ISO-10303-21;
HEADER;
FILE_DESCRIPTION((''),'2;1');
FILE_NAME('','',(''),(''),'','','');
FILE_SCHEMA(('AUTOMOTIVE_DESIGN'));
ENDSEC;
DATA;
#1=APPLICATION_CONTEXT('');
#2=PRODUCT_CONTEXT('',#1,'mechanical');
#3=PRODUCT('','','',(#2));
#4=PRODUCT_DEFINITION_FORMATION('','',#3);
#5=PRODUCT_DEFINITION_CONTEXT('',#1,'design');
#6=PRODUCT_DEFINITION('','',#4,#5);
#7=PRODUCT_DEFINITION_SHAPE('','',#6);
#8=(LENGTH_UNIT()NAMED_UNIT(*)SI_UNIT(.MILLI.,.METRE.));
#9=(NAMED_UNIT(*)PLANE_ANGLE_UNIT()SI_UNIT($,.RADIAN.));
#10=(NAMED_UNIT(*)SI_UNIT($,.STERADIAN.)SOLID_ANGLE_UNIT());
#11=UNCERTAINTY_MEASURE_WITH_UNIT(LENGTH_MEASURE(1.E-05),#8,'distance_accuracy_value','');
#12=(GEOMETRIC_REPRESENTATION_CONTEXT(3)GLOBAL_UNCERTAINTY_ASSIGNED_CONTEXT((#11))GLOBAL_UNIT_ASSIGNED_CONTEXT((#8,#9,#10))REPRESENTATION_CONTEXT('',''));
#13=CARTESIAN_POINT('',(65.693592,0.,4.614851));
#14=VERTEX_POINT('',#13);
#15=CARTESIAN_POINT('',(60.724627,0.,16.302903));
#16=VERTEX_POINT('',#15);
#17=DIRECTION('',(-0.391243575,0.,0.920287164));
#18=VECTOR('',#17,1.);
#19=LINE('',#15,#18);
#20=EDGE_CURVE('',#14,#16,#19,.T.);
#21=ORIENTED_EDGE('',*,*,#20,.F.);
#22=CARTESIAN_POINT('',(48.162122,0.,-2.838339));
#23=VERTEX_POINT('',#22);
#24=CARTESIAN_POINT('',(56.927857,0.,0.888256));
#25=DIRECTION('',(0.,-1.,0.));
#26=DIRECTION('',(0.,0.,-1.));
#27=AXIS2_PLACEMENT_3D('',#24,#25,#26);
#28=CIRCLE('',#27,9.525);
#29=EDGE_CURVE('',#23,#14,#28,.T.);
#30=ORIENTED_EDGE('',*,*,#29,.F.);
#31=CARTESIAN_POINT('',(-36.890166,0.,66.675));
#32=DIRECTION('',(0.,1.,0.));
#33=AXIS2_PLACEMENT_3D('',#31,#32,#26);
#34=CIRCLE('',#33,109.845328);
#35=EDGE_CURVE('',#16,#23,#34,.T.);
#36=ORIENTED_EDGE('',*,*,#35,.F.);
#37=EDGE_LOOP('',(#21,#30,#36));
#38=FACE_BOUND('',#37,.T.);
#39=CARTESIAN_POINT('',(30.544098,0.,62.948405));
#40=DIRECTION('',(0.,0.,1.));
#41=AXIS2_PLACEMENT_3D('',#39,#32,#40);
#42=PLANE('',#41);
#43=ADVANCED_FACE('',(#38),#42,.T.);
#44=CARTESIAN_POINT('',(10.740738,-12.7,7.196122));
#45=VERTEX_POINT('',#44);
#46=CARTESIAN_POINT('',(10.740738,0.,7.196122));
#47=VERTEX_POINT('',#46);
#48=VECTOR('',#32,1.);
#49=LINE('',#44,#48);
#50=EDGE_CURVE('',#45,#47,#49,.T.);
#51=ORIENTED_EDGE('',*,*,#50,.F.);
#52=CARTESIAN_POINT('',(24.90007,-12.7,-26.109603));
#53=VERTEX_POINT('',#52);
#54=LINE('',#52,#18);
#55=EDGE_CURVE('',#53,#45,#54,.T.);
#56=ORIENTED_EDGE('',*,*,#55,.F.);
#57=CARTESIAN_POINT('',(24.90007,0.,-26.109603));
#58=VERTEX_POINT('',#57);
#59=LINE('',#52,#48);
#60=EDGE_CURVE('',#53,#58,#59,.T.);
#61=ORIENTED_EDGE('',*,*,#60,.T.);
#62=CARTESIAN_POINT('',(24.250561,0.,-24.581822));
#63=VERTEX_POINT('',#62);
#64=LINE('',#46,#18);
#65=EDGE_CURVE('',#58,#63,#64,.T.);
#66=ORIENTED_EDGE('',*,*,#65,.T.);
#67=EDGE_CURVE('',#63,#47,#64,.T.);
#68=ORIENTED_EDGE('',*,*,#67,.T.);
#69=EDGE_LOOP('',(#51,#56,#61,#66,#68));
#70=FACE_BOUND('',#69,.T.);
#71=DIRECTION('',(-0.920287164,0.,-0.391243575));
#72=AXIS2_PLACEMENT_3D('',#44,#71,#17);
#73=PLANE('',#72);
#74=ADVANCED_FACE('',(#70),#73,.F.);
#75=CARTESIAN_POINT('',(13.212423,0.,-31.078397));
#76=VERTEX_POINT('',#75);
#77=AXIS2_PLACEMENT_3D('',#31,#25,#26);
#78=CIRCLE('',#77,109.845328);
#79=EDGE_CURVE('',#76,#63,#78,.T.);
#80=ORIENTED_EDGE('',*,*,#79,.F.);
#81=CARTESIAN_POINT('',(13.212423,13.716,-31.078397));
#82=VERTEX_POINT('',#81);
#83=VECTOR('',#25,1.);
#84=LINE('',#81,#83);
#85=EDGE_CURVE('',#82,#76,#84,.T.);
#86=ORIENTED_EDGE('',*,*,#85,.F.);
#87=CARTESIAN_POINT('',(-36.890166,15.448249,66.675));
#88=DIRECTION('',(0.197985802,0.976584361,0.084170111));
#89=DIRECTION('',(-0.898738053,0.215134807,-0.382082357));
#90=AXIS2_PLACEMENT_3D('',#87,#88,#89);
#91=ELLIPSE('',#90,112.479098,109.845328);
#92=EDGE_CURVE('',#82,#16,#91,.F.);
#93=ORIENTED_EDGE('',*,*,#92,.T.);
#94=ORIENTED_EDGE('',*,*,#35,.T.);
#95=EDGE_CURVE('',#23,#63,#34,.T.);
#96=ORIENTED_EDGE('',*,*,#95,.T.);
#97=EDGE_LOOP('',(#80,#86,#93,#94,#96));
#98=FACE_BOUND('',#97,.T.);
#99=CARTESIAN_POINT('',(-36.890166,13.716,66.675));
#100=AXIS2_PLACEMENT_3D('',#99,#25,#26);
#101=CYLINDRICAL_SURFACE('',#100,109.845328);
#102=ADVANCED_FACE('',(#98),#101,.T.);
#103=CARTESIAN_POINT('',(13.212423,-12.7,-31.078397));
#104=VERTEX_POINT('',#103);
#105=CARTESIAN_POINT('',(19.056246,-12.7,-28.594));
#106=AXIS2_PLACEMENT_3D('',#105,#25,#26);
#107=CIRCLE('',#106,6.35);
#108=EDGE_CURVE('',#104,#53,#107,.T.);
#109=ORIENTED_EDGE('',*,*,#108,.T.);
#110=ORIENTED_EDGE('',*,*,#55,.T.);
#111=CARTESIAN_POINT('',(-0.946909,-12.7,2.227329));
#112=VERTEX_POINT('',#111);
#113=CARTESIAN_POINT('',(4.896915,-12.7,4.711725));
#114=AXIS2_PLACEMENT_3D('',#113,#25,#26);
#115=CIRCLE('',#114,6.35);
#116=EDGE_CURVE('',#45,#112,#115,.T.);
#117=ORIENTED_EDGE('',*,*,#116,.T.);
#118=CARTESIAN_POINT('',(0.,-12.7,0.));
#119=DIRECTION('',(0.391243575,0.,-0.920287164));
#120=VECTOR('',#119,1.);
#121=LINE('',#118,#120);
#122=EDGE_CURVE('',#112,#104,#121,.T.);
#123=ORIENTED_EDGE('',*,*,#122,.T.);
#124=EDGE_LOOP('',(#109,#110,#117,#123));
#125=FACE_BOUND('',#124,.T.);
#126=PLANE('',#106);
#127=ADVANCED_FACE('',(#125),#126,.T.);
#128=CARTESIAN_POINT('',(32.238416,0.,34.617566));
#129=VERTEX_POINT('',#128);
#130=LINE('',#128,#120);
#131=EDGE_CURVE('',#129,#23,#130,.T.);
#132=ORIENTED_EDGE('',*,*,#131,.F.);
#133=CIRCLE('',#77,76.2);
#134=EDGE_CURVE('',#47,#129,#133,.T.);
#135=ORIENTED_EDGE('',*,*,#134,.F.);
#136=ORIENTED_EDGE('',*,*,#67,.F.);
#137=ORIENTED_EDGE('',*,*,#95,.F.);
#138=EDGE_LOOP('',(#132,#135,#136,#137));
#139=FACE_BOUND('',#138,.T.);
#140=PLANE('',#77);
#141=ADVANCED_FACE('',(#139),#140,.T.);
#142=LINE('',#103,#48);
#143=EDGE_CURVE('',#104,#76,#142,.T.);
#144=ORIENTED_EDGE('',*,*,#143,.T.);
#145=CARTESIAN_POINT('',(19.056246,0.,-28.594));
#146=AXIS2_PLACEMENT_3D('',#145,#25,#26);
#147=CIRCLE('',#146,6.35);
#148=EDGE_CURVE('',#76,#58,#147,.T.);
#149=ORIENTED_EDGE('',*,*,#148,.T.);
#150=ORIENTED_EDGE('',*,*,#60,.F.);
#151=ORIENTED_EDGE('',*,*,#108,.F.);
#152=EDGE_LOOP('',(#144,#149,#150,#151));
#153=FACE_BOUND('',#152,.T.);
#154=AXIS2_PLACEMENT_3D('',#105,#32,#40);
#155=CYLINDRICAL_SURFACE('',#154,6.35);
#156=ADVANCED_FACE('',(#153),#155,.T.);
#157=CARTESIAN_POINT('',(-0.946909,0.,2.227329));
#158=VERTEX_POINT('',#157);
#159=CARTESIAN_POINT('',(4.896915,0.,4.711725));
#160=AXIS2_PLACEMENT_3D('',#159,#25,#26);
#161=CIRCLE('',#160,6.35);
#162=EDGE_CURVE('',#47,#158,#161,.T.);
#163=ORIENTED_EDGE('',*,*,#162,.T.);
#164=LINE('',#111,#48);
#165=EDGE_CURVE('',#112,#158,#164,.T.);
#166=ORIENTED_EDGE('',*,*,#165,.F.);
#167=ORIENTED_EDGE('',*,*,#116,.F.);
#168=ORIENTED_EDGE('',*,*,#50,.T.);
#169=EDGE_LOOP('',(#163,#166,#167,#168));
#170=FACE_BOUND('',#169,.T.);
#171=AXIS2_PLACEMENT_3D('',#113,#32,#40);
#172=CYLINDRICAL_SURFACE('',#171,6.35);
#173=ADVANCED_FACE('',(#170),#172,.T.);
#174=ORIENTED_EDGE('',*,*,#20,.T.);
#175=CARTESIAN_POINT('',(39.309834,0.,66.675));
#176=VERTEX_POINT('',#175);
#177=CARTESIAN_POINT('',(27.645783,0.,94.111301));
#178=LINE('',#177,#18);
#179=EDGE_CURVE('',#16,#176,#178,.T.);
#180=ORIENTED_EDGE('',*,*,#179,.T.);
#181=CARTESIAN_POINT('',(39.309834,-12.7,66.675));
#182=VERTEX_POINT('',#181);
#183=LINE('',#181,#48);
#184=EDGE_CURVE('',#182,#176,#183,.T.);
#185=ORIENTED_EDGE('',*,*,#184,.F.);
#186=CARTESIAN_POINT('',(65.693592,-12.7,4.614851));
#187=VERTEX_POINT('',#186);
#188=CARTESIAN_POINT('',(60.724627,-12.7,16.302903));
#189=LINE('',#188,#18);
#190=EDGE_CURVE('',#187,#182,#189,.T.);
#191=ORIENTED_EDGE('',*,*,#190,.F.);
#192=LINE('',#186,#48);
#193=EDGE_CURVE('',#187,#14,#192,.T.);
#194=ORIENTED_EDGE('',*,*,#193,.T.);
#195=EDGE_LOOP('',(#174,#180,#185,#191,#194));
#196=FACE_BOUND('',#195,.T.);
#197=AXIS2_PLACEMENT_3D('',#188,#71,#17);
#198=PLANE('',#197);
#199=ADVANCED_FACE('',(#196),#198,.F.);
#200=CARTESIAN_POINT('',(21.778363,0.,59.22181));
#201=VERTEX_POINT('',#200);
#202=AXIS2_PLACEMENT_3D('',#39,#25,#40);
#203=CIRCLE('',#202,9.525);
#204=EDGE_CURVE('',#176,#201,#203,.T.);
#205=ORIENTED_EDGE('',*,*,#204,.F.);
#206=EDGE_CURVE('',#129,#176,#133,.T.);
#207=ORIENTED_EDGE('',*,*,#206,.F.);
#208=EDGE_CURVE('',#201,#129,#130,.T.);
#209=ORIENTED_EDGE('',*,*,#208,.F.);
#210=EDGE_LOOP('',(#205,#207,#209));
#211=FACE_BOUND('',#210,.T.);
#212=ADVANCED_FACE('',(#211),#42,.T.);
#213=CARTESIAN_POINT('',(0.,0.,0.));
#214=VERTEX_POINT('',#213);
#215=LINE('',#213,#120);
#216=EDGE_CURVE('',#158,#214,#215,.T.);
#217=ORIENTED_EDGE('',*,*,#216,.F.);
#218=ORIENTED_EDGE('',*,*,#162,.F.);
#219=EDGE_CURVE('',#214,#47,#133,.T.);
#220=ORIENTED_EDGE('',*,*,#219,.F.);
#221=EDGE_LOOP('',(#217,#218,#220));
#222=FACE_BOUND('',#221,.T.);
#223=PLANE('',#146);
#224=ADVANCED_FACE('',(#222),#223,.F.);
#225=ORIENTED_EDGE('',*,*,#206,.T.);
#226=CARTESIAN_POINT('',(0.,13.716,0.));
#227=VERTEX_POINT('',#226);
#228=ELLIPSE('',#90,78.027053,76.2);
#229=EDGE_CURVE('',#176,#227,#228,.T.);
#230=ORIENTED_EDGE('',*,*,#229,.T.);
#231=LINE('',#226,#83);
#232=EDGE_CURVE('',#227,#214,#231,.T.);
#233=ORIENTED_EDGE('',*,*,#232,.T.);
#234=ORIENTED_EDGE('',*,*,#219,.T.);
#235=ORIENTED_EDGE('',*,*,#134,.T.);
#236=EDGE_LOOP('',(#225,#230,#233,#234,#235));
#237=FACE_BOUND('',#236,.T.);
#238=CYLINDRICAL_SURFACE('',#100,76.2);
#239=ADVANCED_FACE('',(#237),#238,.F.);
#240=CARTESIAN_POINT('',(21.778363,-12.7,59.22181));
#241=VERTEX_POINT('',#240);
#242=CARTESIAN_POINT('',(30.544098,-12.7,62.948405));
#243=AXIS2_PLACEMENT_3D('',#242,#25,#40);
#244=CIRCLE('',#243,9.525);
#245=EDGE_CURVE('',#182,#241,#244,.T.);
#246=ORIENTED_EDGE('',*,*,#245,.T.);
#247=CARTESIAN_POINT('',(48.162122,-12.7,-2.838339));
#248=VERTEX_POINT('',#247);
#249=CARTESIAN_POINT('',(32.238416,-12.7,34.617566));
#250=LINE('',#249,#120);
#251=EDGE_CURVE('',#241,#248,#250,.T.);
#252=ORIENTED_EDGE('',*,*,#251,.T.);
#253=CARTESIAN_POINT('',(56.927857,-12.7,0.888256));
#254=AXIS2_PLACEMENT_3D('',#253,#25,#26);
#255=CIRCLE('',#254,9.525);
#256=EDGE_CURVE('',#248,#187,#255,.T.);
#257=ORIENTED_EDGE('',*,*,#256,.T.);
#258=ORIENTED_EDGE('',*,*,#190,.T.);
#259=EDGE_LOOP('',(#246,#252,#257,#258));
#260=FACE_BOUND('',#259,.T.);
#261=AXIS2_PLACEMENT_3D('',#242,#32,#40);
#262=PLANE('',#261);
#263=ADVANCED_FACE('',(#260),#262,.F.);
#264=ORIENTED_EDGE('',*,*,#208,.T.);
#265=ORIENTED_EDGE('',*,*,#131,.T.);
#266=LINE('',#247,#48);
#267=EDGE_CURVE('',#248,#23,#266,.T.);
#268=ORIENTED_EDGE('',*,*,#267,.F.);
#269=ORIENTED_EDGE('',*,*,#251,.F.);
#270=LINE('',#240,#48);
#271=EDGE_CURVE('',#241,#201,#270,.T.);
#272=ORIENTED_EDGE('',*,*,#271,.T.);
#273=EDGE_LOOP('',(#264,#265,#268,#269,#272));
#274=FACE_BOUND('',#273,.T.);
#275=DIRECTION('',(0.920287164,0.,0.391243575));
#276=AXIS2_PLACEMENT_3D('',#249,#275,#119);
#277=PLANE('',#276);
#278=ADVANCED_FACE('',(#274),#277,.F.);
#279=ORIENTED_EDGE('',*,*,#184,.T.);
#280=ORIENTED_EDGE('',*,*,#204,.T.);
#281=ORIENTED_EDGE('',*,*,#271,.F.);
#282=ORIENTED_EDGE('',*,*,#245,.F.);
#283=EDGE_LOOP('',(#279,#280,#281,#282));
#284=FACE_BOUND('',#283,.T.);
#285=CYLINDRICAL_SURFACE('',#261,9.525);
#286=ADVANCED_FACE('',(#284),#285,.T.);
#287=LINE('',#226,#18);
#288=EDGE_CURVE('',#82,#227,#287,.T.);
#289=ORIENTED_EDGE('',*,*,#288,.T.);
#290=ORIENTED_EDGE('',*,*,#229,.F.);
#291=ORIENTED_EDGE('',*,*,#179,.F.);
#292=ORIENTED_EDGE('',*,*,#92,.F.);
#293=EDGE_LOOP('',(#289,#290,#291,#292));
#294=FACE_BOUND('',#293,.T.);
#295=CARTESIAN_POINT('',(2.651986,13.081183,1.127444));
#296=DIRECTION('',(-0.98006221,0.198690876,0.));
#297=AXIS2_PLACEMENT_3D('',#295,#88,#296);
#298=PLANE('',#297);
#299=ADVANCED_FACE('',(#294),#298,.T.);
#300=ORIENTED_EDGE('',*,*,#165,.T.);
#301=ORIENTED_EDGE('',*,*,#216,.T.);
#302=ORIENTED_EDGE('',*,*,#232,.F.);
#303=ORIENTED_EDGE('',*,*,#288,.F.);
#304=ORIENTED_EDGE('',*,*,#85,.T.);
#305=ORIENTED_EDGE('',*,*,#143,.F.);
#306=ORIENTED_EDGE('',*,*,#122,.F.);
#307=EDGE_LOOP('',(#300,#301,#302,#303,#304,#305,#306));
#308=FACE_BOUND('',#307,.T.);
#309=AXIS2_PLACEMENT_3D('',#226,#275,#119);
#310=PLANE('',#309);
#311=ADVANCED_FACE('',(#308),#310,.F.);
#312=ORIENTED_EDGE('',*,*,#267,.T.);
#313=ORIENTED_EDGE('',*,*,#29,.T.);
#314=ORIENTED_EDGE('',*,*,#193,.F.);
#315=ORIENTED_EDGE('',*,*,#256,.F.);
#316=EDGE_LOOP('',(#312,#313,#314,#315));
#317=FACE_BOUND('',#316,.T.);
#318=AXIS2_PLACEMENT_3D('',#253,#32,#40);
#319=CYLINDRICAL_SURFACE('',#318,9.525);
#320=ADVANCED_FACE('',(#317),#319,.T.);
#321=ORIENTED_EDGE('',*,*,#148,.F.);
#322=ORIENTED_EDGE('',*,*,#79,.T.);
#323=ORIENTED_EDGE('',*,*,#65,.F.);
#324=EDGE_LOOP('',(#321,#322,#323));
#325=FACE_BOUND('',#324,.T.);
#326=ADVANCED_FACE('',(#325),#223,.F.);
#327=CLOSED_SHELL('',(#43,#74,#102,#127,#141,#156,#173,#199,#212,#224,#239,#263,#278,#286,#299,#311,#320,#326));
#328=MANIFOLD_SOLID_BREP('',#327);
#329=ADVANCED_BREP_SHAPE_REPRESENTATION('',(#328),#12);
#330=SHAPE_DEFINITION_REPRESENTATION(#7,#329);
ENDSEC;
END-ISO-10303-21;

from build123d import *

# Parameters (mm, degrees)
BOSS_EXTRUDE4_DEPTH    = 13.716
CUT_EXTRUDE2_START     = 13.394831099
CUT_EXTRUDE2_OUTLINE_W = 71
CUT_EXTRUDE2_OUTLINE_H = 102
CUT_EXTRUDE2_DEPTH     = 19.052275388
BOSS_EXTRUDE7_DEPTH    = 12.7


# Read off the part's stored shape, not the designer's step: Cut-Extrude2
with BuildPart() as part:
    # Sketch2 → Boss-Extrude4 (new body)
    with BuildSketch(Plane(origin=(0, 0, 0), x_dir=(1, 0, 0), z_dir=(0, 1, 0))):
        with BuildLine():
            Line((0, 0), (13.212422732, 31.078396728))
            ThreePointArc((13.212422732, 31.078396728), (47.046788058, 4.181077282), (67.884833627, -33.687193436))
            Line((67.884833627, -33.687193436), (67.884833627, -66.675))
            Line((67.884833627, -66.675), (39.309833627, -66.675))
            ThreePointArc((39.309833627, -66.675), (28.750791411, -27.974810579), (0, 0))
        make_face()
    extrude(amount=BOSS_EXTRUDE4_DEPTH)

    # Cut-Extrude2 outline → Cut-Extrude2 (cut)
    with BuildSketch(Plane(origin=(0, 0, 0), x_dir=(0.9802048878944475, -0.19725451306837943, -0.017001024145327306), z_dir=(0.19798580188446208, 0.9765843612447384, 0.08417011122942132)).offset(CUT_EXTRUDE2_START)):
        with Locations((31.5, -17)):
            Rectangle(CUT_EXTRUDE2_OUTLINE_W, CUT_EXTRUDE2_OUTLINE_H)
    extrude(amount=CUT_EXTRUDE2_DEPTH, mode=Mode.SUBTRACT)

    # Sketch16 → Boss-Extrude7 (add)
    with BuildSketch(Plane.XZ):
        with BuildLine():
            Line((32.238416067, 34.617565762), (48.16212184, -2.83833884))
            ThreePointArc((48.16212184, -2.83833884), (60.654452135, -7.877479025), (65.69359232, 4.614851269))
            Line((65.69359232, 4.614851269), (60.724626835, 16.302903023))
            Line((60.724626835, 16.302903023), (39.309833627, 66.675))
            ThreePointArc((39.309833627, 66.675), (26.817503332, 71.714140186), (21.778363147, 59.221809891))
            Line((21.778363147, 59.221809891), (32.238416067, 34.617565762))
        make_face()
        with BuildLine():
            Line((10.740738204, 7.196121991), (24.250560746, -24.581821632))
            Line((24.250560746, -24.581821632), (24.900069719, -26.109603322))
            ThreePointArc((24.900069719, -26.109603322), (21.540642929, -34.437823519), (13.212422732, -31.078396728))
            Line((13.212422732, -31.078396728), (0, 0))
            Line((0, 0), (-0.946908783, 2.227328585))
            ThreePointArc((-0.946908783, 2.227328585), (2.412518007, 10.555548781), (10.740738204, 7.196121991))
        make_face()
    extrude(amount=BOSS_EXTRUDE7_DEPTH)


solid = part.part
